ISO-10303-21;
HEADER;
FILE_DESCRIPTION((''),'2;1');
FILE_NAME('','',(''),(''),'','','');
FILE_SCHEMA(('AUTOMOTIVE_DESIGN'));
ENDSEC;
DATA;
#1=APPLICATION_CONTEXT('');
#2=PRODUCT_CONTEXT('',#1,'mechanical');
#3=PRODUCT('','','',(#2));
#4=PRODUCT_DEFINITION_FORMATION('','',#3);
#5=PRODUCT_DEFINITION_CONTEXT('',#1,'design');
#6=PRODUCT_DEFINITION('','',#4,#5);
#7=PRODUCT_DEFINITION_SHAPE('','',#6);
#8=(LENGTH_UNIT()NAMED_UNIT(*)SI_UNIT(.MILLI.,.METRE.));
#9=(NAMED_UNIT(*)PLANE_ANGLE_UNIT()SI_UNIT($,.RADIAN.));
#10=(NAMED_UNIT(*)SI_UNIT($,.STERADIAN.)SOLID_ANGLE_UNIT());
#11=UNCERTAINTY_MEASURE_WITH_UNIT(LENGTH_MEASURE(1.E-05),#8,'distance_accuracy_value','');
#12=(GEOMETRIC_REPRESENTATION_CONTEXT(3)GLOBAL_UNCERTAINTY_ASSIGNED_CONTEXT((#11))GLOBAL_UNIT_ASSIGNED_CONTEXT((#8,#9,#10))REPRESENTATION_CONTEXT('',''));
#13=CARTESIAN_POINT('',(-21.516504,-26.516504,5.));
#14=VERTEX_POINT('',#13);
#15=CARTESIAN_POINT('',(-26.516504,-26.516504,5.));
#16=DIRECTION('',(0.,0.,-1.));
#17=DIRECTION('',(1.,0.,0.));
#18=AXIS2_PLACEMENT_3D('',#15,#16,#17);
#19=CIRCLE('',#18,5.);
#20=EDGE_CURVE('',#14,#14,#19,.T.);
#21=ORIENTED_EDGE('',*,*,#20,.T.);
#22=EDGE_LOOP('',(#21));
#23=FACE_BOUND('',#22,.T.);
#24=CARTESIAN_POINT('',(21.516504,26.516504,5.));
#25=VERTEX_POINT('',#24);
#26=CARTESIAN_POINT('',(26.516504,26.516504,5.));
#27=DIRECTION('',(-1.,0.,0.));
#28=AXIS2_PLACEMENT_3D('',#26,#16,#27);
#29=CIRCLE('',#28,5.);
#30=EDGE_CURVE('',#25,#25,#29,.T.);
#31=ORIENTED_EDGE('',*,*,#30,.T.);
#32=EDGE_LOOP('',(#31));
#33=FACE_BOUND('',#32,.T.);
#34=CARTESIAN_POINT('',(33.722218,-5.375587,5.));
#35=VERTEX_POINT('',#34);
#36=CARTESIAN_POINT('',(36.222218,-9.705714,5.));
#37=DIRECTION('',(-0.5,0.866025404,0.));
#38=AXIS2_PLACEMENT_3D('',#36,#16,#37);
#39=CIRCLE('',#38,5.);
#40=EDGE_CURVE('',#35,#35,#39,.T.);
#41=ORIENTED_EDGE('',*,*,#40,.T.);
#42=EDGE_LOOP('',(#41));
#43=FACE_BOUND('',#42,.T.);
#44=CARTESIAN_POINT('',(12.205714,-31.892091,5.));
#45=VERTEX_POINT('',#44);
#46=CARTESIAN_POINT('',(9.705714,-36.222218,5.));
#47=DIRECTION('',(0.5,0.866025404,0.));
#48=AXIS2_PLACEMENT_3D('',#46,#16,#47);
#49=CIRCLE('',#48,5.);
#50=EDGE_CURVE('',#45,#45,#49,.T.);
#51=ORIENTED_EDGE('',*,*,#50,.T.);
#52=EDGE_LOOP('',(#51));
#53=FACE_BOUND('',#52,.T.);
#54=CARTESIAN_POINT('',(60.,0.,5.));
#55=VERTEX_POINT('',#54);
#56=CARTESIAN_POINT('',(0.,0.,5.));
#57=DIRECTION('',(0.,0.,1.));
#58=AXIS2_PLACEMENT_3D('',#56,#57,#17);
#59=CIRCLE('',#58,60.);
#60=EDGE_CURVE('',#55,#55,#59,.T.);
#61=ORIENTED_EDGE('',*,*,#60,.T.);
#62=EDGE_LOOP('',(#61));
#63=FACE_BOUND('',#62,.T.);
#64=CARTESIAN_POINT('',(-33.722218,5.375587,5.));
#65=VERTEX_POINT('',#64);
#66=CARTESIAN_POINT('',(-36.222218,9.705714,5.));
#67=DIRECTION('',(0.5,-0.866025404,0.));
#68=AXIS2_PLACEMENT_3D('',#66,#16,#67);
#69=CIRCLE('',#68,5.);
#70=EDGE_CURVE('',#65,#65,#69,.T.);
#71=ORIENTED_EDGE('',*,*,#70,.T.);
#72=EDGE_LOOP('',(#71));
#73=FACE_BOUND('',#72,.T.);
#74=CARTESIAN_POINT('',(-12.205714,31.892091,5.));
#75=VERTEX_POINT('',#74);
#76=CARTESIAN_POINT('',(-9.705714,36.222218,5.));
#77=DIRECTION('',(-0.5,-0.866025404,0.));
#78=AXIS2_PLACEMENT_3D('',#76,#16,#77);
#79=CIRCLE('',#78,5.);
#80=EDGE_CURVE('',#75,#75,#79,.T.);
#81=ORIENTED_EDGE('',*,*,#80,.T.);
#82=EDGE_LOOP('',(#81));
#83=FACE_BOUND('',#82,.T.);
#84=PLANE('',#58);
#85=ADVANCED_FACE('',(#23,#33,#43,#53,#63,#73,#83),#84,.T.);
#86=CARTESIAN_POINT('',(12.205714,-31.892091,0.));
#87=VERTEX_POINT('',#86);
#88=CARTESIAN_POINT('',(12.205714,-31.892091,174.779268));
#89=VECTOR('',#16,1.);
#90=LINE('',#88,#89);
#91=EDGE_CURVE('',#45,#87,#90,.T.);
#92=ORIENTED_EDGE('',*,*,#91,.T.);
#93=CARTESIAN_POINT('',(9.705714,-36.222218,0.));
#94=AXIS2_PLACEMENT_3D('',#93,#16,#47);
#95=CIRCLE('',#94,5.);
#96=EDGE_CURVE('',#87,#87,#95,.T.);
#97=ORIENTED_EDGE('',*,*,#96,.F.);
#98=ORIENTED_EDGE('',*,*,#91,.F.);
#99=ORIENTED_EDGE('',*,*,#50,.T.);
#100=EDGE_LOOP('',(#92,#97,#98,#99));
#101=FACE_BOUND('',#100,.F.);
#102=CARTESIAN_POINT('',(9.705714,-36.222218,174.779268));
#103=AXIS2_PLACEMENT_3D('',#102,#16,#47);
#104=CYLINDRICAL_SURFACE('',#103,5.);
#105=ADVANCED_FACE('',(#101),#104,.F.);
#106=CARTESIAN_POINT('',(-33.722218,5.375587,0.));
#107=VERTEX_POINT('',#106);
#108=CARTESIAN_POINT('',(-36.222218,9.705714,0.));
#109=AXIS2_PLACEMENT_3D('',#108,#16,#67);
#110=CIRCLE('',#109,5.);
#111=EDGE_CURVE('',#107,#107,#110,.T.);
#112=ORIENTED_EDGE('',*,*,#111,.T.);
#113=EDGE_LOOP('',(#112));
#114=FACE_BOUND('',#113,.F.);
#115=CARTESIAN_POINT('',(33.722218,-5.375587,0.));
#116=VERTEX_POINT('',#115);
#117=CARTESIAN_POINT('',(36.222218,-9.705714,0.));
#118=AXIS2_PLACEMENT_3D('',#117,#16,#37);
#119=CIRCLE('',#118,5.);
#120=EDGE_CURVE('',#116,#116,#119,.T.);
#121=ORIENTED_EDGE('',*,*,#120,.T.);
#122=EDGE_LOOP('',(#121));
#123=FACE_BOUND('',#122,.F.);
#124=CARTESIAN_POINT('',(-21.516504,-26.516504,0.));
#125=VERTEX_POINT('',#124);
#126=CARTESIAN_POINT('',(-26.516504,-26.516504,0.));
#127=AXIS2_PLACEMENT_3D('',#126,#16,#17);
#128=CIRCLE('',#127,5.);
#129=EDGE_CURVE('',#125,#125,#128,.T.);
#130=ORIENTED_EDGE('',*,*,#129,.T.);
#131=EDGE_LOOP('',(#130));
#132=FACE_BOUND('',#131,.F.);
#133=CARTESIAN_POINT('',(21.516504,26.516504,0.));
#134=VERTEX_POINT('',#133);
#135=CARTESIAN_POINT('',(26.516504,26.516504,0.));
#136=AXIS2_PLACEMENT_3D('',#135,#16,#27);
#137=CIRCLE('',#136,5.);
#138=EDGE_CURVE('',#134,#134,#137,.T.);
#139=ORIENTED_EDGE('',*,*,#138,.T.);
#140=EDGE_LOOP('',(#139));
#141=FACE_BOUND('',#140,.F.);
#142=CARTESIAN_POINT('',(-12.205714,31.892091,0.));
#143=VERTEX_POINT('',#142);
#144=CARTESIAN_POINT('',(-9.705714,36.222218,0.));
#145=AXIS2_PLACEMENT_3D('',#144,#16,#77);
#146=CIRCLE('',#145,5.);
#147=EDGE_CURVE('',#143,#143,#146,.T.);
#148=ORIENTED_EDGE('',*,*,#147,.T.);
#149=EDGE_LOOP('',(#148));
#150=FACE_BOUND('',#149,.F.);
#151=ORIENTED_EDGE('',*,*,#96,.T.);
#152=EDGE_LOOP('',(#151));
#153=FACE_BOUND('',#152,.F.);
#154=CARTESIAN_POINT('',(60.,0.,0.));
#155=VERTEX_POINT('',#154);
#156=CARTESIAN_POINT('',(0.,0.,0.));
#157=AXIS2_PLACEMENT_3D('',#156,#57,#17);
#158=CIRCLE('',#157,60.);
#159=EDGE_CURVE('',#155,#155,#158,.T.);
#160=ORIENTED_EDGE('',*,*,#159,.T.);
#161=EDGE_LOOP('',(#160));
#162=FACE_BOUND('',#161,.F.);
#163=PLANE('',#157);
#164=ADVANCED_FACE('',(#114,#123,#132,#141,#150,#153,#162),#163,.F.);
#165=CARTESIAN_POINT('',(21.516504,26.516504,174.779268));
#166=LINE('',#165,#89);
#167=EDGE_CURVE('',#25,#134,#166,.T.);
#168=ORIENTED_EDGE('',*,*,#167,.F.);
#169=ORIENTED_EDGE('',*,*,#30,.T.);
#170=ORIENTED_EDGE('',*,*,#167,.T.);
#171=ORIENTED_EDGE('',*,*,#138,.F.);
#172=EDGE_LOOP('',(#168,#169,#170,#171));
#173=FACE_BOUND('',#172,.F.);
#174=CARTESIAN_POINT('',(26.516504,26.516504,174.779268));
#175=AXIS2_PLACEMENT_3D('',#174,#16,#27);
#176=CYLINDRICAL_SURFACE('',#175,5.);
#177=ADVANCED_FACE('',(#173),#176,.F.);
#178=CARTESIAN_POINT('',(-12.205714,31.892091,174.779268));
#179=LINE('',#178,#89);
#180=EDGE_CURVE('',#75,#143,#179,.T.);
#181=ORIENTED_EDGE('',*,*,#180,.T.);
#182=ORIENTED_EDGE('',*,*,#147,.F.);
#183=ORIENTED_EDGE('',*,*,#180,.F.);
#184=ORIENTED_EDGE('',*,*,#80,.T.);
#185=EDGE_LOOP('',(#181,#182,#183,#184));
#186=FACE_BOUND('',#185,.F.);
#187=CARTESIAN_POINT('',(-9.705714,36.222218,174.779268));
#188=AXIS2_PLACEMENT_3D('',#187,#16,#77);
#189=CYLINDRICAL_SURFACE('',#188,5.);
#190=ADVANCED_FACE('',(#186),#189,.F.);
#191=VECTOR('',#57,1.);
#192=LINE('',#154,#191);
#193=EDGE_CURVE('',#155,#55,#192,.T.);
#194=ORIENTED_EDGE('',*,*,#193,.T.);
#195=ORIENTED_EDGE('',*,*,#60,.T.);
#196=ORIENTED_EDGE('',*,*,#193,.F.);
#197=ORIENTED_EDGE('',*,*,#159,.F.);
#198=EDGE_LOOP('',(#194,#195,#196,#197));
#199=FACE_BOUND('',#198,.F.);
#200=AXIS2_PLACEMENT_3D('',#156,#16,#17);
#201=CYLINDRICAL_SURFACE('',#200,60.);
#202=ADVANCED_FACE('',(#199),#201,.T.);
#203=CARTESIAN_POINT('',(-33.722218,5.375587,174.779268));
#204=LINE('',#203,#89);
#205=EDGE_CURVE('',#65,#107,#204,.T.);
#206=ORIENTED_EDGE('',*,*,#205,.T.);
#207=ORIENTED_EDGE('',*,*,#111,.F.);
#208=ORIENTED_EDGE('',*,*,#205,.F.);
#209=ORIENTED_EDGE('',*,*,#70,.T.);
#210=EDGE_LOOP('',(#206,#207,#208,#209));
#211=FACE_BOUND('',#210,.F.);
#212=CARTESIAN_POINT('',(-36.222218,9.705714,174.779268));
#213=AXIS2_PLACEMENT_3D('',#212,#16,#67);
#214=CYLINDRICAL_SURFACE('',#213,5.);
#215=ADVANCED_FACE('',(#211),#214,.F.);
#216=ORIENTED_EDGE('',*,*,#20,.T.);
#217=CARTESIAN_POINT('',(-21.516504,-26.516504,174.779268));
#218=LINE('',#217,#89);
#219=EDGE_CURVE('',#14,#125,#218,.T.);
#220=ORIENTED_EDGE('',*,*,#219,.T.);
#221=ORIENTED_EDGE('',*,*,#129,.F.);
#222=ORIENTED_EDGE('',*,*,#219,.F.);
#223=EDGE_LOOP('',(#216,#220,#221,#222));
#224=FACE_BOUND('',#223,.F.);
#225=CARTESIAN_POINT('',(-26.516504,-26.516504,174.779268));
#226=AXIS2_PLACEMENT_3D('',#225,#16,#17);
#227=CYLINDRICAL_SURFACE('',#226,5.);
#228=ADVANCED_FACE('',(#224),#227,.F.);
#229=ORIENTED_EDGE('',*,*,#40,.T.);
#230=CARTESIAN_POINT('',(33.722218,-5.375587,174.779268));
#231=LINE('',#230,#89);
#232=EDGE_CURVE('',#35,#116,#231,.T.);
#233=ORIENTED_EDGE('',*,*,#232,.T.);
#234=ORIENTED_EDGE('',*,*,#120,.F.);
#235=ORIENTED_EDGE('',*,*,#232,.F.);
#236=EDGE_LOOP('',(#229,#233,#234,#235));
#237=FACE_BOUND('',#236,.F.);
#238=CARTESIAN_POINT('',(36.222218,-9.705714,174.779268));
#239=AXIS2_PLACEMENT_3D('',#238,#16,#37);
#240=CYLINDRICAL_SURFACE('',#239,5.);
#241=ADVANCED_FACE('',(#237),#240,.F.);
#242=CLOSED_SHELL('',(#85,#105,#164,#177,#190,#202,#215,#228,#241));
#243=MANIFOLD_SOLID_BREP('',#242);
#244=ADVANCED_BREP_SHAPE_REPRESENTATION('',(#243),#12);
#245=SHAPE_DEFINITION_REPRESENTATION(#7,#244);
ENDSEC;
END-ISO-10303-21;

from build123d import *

# Parameters (mm, degrees)
F0_R            = 60
F1_DEPTH        = 5
F3_D            = 10
F3_COPIES_COUNT = 6


# Not quite as in the source:
# - a pattern or mirror of a feature is missing from the dataset's text; its kind, count and spacing are read off the source's solid


with BuildPart() as f1:
    # F0 (on Top) → F1 (new body)
    with BuildSketch(Plane.XY):
        Circle(F0_R)
    extrude(amount=F1_DEPTH)

    # F3 (through all)
    with Locations(Plane.XY.offset(5)):
        with Locations((26.5165042945, 26.5165042945)):
            f3 = Hole(F3_D / 2)

    # F3_copies: F3 ×6 about axis
    f3_copies_axis = Axis((0, 0, 0), (0, 0, 1))
    for i in range(1, F3_COPIES_COUNT):
        add(f3.rotate(f3_copies_axis, i * 360 / F3_COPIES_COUNT), mode=Mode.SUBTRACT)


solid = f1.part
